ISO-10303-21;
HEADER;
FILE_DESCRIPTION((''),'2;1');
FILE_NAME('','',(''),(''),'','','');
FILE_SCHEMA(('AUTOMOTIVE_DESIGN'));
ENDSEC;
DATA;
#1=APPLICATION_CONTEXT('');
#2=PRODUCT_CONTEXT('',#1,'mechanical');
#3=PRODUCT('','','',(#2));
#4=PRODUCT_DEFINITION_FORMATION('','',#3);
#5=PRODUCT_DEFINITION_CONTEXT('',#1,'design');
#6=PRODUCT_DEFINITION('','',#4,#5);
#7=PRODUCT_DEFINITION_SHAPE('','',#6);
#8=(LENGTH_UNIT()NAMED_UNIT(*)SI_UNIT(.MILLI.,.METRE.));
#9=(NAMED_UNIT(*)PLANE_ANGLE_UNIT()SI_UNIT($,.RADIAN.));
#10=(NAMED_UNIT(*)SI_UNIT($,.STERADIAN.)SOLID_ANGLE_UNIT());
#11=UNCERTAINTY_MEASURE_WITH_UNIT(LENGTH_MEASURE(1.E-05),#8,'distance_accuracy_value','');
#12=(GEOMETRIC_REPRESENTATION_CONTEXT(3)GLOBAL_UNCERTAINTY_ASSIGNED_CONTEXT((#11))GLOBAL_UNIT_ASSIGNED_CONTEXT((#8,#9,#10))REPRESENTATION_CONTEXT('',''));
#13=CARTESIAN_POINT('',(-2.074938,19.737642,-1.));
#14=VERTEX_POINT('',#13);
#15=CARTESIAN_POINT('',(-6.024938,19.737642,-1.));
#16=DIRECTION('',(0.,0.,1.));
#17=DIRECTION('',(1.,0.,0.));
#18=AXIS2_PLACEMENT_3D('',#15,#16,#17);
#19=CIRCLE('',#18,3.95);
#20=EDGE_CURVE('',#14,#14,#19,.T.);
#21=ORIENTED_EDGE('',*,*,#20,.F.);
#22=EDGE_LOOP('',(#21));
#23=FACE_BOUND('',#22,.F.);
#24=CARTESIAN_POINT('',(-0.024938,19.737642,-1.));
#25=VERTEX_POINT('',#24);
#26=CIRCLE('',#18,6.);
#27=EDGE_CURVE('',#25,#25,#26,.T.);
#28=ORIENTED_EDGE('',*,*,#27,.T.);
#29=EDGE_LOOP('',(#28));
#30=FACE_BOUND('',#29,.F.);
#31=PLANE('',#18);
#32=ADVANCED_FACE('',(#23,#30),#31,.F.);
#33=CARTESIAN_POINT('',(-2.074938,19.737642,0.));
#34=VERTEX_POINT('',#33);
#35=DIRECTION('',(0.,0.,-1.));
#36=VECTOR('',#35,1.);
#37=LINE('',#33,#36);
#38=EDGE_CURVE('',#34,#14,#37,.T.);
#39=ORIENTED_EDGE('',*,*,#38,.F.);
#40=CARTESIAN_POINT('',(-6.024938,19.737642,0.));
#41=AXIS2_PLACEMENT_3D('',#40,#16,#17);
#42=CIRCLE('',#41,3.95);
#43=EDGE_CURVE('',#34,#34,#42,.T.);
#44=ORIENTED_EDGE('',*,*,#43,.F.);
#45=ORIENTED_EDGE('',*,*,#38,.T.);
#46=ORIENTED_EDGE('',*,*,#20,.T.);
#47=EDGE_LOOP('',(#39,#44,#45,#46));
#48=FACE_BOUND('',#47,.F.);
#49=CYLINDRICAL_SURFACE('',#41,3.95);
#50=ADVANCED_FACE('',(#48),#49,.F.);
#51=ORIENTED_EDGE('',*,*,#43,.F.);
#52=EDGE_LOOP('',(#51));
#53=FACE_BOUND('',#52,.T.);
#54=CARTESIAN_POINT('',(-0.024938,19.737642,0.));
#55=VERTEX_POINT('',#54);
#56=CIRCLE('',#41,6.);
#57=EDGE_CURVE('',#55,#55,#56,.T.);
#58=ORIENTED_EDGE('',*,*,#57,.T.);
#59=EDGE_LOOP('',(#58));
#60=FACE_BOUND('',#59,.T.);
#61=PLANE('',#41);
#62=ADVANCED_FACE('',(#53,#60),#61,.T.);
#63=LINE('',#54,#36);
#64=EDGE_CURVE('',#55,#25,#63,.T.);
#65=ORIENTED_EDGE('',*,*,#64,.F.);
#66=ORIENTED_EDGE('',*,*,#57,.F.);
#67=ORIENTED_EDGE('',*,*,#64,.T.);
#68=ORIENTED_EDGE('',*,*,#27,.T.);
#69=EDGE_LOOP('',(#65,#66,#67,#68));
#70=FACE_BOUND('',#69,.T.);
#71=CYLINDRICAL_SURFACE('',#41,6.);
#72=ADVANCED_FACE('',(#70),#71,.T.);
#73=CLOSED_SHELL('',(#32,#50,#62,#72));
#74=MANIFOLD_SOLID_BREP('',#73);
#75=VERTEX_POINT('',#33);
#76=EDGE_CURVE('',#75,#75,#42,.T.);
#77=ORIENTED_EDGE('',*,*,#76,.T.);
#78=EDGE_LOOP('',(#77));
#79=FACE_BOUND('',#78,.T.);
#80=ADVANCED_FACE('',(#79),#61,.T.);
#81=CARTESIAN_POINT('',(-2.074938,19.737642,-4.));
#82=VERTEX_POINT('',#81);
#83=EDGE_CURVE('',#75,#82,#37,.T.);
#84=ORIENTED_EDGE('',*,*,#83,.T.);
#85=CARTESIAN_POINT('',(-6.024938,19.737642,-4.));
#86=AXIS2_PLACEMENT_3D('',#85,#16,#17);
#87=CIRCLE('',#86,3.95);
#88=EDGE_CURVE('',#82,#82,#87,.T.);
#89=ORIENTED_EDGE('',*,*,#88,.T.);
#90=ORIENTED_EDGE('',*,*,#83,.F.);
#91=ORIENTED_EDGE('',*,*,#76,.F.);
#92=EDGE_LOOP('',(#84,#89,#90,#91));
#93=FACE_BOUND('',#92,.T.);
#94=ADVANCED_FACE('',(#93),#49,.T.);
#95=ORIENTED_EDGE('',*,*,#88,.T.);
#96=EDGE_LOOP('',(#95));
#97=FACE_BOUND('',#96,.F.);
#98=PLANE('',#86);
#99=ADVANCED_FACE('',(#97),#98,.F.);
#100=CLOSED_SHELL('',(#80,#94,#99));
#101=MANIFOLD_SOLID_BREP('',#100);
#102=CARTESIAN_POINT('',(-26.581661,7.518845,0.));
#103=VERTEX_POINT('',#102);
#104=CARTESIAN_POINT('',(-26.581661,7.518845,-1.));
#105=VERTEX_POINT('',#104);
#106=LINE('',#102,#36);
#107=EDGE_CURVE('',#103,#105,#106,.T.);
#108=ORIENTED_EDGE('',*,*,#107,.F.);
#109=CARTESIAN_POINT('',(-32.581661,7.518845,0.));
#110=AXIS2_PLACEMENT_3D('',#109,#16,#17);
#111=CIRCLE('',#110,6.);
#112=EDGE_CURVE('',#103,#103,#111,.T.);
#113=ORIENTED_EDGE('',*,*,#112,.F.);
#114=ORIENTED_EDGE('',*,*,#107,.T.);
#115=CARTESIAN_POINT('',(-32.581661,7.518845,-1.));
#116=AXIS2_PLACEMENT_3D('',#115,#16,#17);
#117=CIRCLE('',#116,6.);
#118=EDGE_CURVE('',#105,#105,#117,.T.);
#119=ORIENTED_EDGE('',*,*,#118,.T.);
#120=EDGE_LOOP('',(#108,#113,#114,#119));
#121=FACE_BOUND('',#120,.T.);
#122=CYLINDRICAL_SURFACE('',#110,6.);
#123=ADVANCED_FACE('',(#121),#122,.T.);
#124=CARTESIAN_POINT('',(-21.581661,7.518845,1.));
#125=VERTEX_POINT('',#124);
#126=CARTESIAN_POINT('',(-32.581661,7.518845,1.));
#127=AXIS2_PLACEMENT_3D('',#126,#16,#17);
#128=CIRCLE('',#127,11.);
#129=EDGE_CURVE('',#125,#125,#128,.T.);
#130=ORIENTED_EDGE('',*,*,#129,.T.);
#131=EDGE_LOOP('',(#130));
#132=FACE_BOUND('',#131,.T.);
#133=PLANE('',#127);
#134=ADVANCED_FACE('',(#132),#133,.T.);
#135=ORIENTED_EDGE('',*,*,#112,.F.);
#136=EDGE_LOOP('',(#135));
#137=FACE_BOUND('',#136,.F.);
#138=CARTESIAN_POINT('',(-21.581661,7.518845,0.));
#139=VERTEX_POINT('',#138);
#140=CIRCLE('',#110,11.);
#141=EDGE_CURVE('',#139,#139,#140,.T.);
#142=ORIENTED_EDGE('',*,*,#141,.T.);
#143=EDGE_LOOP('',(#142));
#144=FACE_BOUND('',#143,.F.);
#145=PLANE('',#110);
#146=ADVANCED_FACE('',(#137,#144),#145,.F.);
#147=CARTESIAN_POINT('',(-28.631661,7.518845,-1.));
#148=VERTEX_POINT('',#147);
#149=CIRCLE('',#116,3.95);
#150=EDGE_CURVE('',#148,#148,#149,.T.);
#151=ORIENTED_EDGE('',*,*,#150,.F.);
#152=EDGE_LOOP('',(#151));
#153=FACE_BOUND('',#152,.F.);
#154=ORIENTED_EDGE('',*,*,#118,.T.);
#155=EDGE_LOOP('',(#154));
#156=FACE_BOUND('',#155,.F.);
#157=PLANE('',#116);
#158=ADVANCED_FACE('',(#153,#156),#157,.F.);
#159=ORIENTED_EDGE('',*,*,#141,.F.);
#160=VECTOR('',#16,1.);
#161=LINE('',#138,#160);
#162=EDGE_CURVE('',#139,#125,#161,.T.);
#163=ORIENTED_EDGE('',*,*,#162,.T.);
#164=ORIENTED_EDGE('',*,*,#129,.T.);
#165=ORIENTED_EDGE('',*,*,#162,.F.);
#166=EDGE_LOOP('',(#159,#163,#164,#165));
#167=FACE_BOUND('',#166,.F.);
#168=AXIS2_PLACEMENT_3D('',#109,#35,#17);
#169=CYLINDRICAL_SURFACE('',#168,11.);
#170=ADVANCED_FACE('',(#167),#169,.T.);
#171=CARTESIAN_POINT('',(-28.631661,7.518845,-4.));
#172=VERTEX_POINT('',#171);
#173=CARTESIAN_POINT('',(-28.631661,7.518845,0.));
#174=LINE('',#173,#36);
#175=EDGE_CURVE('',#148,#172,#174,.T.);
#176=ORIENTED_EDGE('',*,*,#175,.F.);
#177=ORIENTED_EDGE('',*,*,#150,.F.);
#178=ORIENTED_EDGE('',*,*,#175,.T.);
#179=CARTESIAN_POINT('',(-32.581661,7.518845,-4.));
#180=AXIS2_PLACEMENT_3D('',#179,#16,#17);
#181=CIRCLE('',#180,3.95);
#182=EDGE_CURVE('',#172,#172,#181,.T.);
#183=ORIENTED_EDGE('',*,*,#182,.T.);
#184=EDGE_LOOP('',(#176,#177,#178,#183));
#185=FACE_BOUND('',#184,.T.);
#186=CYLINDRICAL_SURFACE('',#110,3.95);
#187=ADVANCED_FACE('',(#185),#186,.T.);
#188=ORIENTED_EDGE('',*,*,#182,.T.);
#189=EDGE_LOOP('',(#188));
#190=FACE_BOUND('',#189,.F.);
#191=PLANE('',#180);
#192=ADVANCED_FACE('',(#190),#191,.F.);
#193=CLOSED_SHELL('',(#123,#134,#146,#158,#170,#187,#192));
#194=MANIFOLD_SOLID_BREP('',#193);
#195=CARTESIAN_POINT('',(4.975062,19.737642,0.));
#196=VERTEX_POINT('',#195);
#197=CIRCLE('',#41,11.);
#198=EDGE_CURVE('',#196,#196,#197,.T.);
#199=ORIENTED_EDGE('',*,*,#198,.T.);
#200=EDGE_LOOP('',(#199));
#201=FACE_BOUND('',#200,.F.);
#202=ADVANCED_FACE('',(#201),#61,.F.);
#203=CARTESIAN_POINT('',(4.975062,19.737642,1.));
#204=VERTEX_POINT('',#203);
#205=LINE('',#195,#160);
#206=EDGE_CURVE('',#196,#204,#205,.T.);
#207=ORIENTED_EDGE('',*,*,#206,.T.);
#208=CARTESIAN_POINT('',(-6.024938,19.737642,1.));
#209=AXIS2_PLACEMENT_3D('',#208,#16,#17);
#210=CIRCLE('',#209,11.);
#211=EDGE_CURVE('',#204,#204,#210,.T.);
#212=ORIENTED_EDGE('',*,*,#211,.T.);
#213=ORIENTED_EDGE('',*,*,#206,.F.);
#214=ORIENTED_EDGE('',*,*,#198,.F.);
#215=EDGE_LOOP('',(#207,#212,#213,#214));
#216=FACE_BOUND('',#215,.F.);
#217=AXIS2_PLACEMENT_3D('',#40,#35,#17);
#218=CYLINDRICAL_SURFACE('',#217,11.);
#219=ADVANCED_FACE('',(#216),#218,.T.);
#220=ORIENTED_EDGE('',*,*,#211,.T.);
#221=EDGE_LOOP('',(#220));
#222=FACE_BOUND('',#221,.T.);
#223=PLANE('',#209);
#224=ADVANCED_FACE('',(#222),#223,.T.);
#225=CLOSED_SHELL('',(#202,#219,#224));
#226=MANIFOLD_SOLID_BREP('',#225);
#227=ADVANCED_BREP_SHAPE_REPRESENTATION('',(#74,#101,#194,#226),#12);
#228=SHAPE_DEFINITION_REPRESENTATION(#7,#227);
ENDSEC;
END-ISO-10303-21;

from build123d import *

# Parameters (mm, degrees)
F0_R     = 11
F0_R_2   = 6
F0_R_3   = 3.95
F1_DEPTH = 1
F2_DEPTH = 4
F3_DEPTH = 1


with BuildPart() as f1:
    # F0 (on Top) → F1 (new body)
    with BuildSketch(Plane.XY):
        with Locations((-32.5816608965, 7.518844679)):
            Circle(F0_R)
        with Locations((-32.5816608965, 7.518844679)):
            Circle(F0_R_2, mode=Mode.SUBTRACT)
        with Locations((-32.5816608965, 7.518844679)):
            Circle(F0_R_2)
        with Locations((-32.5816608965, 7.518844679)):
            Circle(F0_R_3, mode=Mode.SUBTRACT)
        with Locations((-32.5816608965, 7.518844679)):
            Circle(F0_R_3)
    extrude(amount=F1_DEPTH)

    # F0 (on Top) → F2 (join)
    with BuildSketch(Plane.XY):
        with Locations((-32.5816608965, 7.518844679)):
            Circle(F0_R_3)
    extrude(amount=-F2_DEPTH)

    # F0 (on Top) → F3 (join)
    with BuildSketch(Plane.XY):
        with Locations((-32.5816608965, 7.518844679)):
            Circle(F0_R_2)
        with Locations((-32.5816608965, 7.518844679)):
            Circle(F0_R_3, mode=Mode.SUBTRACT)
    extrude(amount=-F3_DEPTH)


with BuildPart() as f1b:
    # F0 (on Top) → F1, piece 2 (new body)
    with BuildSketch(Plane.XY):
        with Locations((-6.0249380767, 19.7376422584)):
            Circle(F0_R)
        with Locations((-6.0249380767, 19.7376422584)):
            Circle(F0_R_2, mode=Mode.SUBTRACT)
        with Locations((-6.0249380767, 19.7376422584)):
            Circle(F0_R_2)
        with Locations((-6.0249380767, 19.7376422584)):
            Circle(F0_R_3, mode=Mode.SUBTRACT)
        with Locations((-6.0249380767, 19.7376422584)):
            Circle(F0_R_3)
    extrude(amount=F1_DEPTH)


with BuildPart() as f2:
    # F0 (on Top) → F2, piece 2 (new body)
    with BuildSketch(Plane.XY):
        with Locations((-6.0249380767, 19.7376422584)):
            Circle(F0_R_3)
    extrude(amount=-F2_DEPTH)


with BuildPart() as f3:
    # F0 (on Top) → F3, piece 2 (new body)
    with BuildSketch(Plane.XY):
        with Locations((-6.0249380767, 19.7376422584)):
            Circle(F0_R_2)
        with Locations((-6.0249380767, 19.7376422584)):
            Circle(F0_R_3, mode=Mode.SUBTRACT)
    extrude(amount=-F3_DEPTH)


solid = Compound([f1.part, f1b.part, f2.part, f3.part])
